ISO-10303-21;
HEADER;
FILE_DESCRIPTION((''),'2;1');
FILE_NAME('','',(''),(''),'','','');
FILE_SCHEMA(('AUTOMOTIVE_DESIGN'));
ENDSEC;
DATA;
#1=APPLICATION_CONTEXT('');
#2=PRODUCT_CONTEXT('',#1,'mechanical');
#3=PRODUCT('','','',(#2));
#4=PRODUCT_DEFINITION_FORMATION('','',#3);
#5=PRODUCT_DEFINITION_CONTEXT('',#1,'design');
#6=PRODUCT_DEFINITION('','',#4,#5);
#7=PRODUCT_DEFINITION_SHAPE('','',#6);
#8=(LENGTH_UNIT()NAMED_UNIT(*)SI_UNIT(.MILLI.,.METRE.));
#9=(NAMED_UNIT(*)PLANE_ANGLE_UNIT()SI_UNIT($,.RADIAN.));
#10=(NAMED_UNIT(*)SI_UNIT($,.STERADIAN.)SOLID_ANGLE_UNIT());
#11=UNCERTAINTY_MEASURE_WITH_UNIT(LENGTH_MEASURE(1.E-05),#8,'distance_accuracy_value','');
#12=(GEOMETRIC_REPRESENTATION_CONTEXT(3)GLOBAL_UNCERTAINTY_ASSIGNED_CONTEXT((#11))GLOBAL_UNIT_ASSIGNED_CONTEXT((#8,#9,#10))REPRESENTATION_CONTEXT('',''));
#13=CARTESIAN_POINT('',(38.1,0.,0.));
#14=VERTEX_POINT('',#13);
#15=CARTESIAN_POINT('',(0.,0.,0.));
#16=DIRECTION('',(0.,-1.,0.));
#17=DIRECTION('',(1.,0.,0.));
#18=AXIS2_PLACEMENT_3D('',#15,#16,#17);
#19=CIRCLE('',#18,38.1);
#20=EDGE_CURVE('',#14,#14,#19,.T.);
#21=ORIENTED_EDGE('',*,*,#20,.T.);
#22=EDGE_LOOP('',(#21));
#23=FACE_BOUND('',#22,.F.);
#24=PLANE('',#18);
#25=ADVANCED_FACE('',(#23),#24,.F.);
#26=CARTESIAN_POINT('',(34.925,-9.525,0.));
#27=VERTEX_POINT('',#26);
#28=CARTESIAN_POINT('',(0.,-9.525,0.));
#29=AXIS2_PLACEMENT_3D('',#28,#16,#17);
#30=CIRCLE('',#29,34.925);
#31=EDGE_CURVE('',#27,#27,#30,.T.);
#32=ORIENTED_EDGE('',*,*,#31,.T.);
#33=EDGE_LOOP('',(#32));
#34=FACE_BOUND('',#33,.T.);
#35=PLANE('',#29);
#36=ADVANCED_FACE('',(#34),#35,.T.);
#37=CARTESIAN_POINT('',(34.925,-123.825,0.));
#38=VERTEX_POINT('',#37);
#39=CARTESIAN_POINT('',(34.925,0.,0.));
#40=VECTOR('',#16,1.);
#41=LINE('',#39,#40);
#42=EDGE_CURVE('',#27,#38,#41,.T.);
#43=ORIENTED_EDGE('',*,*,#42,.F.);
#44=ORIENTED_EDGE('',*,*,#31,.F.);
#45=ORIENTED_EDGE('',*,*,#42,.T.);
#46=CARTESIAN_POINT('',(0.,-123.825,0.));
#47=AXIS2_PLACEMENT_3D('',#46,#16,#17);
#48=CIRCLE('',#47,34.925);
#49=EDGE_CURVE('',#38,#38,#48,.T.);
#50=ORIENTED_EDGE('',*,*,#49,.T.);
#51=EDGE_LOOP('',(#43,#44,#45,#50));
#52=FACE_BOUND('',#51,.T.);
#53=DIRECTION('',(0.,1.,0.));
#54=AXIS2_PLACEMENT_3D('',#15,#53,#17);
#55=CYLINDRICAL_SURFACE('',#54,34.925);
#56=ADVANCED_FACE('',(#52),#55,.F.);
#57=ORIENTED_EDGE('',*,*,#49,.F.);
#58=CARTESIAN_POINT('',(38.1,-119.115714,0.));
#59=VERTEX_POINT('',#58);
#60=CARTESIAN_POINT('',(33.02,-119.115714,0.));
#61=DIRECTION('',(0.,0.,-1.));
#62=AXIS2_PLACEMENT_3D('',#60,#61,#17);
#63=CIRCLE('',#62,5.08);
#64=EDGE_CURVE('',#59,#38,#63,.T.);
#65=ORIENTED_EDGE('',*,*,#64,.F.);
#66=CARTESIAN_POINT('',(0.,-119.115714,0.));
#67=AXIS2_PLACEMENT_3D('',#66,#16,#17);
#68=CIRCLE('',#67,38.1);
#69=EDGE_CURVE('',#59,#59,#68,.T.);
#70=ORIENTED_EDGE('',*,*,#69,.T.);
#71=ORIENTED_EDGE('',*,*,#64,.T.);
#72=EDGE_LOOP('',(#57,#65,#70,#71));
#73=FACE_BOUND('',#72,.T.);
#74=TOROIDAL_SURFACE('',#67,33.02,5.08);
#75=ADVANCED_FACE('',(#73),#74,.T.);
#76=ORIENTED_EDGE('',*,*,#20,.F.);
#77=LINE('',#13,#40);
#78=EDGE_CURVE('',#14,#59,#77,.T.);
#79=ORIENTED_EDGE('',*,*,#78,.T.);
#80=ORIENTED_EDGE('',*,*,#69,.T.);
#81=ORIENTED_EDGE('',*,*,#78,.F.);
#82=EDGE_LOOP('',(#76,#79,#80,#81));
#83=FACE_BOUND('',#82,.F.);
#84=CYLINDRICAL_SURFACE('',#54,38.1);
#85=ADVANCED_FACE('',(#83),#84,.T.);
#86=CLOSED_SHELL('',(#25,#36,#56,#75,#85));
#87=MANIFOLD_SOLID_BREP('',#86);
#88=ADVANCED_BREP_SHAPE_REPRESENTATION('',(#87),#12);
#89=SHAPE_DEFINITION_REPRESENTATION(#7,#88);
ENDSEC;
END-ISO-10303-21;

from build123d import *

# Parameters (mm, degrees)
F0_R     = 38.1
F0_R_2   = 34.925
F1_DEPTH = 123.825
F2_R     = 34.925
F3_DEPTH = 9.525


# Not quite as in the source:
# - a fillet or chamfer that OpenCascade refuses, or shapes differently, is made with other operations: its cross-section is extruded or revolved along the edge and cut away or added


with BuildPart() as f1:
    # F0 (on Front) → F1 (new body)
    with BuildSketch(Plane.XZ):
        Circle(F0_R)
        Circle(F0_R_2, mode=Mode.SUBTRACT)
    extrude(amount=F1_DEPTH)

    # F2 (on Front) → F3 (join)
    with BuildSketch(Plane.XZ):
        Circle(F2_R)
    extrude(amount=F3_DEPTH)

    # F4: fillet of radius 5.08 on 1 edges, made by hand

    # F4_s1 → F4_t2 (revolve, cut)
    with BuildSketch(Plane.XY):
        with BuildLine():
            ThreePointArc((38.1, -119.1157139607), (37.2321134838, -121.9555202921), (34.925, -123.825))
            Line((34.925, -123.825), (38.1, -123.825))
            Line((38.1, -123.825), (38.1, -119.1157139607))
        make_face()
    revolve(axis=Axis((0, -123.825, 0), (0, -1, 0)), mode=Mode.SUBTRACT)


solid = f1.part
